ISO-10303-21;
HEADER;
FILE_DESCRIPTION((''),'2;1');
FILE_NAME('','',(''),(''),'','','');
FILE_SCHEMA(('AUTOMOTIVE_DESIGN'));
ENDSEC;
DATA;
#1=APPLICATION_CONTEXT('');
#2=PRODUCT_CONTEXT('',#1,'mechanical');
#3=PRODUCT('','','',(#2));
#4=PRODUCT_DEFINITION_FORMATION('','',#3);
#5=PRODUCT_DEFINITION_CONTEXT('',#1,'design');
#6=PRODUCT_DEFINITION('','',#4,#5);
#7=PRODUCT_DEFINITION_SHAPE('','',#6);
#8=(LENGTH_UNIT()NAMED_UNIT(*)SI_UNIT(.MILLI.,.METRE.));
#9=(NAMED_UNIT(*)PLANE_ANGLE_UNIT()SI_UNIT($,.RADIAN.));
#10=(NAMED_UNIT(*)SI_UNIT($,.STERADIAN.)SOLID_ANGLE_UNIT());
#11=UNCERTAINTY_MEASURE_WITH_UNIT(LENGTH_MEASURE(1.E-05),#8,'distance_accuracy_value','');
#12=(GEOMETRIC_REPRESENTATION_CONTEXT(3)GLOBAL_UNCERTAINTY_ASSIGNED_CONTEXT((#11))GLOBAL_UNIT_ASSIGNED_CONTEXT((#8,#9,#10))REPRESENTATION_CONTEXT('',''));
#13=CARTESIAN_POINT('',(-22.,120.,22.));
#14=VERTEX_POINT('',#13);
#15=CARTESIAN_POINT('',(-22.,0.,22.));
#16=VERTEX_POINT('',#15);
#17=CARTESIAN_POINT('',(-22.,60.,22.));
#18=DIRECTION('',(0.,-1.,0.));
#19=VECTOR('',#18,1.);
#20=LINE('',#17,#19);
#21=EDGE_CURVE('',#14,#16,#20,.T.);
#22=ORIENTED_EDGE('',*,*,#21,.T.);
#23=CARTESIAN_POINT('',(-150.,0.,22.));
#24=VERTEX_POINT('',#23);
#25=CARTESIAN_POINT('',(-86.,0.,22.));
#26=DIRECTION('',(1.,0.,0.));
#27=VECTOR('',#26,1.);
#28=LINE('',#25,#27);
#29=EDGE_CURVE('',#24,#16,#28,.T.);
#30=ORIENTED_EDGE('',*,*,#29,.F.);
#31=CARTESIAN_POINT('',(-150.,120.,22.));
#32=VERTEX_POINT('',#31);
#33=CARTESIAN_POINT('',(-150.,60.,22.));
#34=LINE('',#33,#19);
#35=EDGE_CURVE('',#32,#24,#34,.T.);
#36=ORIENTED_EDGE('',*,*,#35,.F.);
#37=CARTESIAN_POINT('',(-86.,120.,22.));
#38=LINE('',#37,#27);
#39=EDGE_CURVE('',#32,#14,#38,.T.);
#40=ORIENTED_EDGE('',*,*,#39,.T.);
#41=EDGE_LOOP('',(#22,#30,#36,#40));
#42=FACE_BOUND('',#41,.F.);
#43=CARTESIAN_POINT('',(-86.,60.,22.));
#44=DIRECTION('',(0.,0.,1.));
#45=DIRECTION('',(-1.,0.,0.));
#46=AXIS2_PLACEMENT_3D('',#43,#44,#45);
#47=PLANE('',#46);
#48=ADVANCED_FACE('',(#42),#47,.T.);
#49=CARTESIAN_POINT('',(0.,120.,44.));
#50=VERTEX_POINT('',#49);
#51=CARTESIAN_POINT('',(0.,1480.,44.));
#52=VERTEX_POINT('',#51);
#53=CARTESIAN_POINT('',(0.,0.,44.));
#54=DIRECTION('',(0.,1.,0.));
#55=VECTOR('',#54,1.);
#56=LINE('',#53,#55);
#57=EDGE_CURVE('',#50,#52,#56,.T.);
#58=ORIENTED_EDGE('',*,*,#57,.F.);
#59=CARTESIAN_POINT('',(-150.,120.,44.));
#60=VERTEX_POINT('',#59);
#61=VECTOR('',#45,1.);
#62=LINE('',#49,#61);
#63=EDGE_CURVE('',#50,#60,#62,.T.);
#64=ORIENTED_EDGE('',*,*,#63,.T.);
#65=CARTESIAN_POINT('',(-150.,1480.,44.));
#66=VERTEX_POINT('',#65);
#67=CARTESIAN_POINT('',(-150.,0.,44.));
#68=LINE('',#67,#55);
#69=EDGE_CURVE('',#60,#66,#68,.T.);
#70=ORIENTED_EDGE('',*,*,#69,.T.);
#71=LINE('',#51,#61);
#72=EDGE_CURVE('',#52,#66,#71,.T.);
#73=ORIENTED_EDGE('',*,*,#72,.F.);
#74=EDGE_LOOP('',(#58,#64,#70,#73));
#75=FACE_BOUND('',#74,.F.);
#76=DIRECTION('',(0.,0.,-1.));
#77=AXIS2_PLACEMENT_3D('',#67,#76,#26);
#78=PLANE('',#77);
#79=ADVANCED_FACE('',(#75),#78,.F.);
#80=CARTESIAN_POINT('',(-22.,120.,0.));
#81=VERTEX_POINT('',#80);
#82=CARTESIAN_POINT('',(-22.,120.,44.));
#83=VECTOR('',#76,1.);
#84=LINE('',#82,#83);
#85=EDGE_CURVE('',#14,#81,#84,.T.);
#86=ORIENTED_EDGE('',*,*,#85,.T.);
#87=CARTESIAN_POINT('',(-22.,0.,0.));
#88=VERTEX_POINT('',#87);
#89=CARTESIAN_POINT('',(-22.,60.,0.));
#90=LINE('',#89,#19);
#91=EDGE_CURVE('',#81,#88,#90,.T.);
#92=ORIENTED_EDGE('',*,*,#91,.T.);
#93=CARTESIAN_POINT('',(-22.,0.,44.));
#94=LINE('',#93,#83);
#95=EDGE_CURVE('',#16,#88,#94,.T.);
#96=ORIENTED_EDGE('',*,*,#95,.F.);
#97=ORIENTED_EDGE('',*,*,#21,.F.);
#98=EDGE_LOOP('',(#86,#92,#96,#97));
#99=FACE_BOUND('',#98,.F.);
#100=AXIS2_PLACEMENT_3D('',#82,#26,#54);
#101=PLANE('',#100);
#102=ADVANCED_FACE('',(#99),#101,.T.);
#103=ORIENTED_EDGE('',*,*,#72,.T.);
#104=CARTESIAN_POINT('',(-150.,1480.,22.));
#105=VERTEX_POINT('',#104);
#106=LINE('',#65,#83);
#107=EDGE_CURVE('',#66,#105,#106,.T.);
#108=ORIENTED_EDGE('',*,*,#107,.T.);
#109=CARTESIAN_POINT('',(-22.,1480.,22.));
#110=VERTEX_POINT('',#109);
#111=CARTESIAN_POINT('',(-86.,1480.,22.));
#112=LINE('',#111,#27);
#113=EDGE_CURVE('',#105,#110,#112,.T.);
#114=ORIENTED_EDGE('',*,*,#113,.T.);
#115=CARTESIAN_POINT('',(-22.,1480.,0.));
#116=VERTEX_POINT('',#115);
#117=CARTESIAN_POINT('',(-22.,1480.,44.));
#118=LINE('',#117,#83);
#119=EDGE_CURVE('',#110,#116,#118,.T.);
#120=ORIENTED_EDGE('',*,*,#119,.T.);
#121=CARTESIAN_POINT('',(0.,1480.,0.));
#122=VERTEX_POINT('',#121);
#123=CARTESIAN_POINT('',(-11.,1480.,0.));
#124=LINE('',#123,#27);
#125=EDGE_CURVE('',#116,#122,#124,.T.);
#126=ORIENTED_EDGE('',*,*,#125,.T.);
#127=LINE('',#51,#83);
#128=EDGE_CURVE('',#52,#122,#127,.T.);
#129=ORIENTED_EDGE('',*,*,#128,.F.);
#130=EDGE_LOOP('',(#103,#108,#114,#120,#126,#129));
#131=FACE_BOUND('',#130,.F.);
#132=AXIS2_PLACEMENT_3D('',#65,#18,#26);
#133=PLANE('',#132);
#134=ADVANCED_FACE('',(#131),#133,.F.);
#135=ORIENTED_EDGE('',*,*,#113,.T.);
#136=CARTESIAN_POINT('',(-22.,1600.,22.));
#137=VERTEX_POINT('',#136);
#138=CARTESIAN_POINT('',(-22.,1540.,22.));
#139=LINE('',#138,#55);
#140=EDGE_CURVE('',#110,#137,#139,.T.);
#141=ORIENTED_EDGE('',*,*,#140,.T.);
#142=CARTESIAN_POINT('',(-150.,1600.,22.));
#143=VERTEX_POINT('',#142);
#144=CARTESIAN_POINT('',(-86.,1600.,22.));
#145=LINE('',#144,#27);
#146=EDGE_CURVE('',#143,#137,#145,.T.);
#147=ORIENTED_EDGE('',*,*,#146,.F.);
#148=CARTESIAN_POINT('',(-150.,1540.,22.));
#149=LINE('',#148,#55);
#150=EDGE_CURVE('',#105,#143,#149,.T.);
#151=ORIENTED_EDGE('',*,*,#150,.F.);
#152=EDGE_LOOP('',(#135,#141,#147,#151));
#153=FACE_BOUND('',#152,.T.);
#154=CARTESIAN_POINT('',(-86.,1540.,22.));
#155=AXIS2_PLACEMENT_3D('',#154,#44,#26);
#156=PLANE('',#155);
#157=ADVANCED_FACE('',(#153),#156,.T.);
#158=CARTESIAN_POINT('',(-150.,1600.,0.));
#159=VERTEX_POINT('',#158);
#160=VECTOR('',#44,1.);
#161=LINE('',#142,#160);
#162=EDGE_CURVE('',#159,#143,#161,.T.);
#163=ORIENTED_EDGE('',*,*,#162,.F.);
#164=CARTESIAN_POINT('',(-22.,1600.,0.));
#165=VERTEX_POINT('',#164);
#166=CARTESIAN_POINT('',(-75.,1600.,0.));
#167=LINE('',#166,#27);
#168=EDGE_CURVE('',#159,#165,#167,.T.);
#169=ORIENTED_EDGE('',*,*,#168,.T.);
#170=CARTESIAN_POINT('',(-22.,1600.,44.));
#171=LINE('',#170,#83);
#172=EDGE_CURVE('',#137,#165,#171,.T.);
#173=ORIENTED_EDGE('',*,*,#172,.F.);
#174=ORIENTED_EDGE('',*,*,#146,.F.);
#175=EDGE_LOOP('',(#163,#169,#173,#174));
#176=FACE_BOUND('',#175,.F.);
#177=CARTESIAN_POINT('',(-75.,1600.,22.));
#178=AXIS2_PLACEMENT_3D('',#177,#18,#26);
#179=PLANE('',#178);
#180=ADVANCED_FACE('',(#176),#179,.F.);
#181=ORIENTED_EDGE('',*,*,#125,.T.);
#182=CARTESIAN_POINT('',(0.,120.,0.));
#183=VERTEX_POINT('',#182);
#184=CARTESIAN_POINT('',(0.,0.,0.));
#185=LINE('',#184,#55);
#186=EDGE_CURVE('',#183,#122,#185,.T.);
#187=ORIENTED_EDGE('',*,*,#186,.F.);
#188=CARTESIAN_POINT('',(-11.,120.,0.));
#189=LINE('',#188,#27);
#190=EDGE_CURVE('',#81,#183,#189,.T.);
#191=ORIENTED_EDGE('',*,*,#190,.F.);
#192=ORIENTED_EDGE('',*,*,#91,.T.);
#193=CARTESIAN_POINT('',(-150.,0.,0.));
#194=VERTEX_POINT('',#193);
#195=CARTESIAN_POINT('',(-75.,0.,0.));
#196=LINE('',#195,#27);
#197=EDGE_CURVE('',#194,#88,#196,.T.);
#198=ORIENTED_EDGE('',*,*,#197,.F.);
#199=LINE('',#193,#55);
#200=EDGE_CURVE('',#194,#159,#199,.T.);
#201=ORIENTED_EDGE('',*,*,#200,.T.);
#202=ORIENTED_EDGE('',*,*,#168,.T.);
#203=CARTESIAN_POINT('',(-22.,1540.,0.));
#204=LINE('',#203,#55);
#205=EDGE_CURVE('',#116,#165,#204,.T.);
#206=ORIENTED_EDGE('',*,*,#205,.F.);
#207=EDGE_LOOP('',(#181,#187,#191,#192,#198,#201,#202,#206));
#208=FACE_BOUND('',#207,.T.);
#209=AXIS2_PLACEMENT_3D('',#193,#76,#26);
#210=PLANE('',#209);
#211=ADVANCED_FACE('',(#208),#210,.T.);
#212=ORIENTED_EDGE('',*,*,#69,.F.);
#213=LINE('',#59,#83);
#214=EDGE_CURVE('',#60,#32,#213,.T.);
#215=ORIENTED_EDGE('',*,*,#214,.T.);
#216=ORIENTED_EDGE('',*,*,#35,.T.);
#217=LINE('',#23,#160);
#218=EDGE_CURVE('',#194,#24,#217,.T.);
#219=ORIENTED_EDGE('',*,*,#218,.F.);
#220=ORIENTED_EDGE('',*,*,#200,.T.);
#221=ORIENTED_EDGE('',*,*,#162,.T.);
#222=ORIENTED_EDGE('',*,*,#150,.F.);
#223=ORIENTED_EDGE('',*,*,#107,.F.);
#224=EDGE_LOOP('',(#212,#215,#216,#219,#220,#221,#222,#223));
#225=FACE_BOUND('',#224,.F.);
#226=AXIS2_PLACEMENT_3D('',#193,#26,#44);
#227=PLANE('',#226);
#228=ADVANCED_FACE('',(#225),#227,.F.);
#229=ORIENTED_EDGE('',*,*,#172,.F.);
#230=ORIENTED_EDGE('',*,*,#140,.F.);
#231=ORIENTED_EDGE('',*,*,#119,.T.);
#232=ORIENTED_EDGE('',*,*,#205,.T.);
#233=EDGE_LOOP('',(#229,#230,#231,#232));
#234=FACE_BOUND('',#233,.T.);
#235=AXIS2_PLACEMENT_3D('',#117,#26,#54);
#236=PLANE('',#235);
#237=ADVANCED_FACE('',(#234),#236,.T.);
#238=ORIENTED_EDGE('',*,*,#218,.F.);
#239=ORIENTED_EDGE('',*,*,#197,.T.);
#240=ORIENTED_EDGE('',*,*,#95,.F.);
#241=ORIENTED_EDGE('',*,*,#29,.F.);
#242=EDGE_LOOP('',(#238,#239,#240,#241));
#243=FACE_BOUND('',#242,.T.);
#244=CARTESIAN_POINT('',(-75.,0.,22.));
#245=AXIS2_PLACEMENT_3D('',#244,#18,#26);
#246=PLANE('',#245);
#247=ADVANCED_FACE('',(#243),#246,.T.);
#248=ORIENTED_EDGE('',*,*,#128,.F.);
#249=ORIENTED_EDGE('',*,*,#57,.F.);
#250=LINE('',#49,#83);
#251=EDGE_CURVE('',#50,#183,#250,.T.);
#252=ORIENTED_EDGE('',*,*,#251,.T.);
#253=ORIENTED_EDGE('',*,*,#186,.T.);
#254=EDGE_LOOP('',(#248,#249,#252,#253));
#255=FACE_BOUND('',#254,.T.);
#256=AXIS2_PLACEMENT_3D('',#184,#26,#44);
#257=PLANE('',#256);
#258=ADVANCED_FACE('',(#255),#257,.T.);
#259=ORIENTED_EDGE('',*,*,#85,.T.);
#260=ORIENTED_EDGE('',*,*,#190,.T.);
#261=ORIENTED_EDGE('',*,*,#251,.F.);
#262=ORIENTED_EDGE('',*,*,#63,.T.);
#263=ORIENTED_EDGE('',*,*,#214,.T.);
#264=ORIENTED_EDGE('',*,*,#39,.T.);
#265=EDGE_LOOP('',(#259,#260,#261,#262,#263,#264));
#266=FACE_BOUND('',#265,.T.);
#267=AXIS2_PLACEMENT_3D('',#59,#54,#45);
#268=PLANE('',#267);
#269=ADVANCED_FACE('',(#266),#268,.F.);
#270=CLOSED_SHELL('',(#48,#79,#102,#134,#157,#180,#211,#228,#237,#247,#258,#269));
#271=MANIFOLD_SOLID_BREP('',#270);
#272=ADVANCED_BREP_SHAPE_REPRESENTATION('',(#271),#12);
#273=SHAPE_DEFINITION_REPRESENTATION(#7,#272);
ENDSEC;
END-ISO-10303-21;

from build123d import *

# Parameters (mm, degrees)
F0_W     = 150
F0_H     = 44
F1_DEPTH = 1600
F4_W     = 22
F4_H     = 120
F5_DEPTH = 44
F6_W     = 128
F6_H     = 120
F7_DEPTH = 22


# Not quite as in the source:
# - a pattern or mirror of a feature is missing from the dataset's text; its kind, count and spacing are read off the source's solid


with BuildPart() as f1:
    # F0 (on Front) → F1 (new body)
    with BuildSketch(Plane.XZ):
        with Locations((-75, 22)):
            Rectangle(F0_W, F0_H)
    extrude(amount=-F1_DEPTH)

    # F4 (on face) → F5 (cut, through all)
    with BuildSketch(Plane.XY.offset(44)):
        with Locations((-11, 1540)):
            Rectangle(F4_W, F4_H)
    f5 = extrude(amount=-F5_DEPTH, mode=Mode.SUBTRACT)

    # F5_copies: F5 across plane
    add(f5.mirror(Plane(origin=(0, 800, 0), x_dir=(0, 0, -1), z_dir=(0, -1, 0))), mode=Mode.SUBTRACT)

    # F6 (on face) → F7 (cut)
    with BuildSketch(Plane.XY.offset(44)):
        with Locations((-86, 1540)):
            Rectangle(F6_W, F6_H)
    f7 = extrude(amount=-F7_DEPTH, mode=Mode.SUBTRACT)

    # F7_copies: F7 across plane
    add(f7.mirror(Plane(origin=(0, 800, 0), x_dir=(0, 0, -1), z_dir=(0, -1, 0))), mode=Mode.SUBTRACT)


solid = f1.part
